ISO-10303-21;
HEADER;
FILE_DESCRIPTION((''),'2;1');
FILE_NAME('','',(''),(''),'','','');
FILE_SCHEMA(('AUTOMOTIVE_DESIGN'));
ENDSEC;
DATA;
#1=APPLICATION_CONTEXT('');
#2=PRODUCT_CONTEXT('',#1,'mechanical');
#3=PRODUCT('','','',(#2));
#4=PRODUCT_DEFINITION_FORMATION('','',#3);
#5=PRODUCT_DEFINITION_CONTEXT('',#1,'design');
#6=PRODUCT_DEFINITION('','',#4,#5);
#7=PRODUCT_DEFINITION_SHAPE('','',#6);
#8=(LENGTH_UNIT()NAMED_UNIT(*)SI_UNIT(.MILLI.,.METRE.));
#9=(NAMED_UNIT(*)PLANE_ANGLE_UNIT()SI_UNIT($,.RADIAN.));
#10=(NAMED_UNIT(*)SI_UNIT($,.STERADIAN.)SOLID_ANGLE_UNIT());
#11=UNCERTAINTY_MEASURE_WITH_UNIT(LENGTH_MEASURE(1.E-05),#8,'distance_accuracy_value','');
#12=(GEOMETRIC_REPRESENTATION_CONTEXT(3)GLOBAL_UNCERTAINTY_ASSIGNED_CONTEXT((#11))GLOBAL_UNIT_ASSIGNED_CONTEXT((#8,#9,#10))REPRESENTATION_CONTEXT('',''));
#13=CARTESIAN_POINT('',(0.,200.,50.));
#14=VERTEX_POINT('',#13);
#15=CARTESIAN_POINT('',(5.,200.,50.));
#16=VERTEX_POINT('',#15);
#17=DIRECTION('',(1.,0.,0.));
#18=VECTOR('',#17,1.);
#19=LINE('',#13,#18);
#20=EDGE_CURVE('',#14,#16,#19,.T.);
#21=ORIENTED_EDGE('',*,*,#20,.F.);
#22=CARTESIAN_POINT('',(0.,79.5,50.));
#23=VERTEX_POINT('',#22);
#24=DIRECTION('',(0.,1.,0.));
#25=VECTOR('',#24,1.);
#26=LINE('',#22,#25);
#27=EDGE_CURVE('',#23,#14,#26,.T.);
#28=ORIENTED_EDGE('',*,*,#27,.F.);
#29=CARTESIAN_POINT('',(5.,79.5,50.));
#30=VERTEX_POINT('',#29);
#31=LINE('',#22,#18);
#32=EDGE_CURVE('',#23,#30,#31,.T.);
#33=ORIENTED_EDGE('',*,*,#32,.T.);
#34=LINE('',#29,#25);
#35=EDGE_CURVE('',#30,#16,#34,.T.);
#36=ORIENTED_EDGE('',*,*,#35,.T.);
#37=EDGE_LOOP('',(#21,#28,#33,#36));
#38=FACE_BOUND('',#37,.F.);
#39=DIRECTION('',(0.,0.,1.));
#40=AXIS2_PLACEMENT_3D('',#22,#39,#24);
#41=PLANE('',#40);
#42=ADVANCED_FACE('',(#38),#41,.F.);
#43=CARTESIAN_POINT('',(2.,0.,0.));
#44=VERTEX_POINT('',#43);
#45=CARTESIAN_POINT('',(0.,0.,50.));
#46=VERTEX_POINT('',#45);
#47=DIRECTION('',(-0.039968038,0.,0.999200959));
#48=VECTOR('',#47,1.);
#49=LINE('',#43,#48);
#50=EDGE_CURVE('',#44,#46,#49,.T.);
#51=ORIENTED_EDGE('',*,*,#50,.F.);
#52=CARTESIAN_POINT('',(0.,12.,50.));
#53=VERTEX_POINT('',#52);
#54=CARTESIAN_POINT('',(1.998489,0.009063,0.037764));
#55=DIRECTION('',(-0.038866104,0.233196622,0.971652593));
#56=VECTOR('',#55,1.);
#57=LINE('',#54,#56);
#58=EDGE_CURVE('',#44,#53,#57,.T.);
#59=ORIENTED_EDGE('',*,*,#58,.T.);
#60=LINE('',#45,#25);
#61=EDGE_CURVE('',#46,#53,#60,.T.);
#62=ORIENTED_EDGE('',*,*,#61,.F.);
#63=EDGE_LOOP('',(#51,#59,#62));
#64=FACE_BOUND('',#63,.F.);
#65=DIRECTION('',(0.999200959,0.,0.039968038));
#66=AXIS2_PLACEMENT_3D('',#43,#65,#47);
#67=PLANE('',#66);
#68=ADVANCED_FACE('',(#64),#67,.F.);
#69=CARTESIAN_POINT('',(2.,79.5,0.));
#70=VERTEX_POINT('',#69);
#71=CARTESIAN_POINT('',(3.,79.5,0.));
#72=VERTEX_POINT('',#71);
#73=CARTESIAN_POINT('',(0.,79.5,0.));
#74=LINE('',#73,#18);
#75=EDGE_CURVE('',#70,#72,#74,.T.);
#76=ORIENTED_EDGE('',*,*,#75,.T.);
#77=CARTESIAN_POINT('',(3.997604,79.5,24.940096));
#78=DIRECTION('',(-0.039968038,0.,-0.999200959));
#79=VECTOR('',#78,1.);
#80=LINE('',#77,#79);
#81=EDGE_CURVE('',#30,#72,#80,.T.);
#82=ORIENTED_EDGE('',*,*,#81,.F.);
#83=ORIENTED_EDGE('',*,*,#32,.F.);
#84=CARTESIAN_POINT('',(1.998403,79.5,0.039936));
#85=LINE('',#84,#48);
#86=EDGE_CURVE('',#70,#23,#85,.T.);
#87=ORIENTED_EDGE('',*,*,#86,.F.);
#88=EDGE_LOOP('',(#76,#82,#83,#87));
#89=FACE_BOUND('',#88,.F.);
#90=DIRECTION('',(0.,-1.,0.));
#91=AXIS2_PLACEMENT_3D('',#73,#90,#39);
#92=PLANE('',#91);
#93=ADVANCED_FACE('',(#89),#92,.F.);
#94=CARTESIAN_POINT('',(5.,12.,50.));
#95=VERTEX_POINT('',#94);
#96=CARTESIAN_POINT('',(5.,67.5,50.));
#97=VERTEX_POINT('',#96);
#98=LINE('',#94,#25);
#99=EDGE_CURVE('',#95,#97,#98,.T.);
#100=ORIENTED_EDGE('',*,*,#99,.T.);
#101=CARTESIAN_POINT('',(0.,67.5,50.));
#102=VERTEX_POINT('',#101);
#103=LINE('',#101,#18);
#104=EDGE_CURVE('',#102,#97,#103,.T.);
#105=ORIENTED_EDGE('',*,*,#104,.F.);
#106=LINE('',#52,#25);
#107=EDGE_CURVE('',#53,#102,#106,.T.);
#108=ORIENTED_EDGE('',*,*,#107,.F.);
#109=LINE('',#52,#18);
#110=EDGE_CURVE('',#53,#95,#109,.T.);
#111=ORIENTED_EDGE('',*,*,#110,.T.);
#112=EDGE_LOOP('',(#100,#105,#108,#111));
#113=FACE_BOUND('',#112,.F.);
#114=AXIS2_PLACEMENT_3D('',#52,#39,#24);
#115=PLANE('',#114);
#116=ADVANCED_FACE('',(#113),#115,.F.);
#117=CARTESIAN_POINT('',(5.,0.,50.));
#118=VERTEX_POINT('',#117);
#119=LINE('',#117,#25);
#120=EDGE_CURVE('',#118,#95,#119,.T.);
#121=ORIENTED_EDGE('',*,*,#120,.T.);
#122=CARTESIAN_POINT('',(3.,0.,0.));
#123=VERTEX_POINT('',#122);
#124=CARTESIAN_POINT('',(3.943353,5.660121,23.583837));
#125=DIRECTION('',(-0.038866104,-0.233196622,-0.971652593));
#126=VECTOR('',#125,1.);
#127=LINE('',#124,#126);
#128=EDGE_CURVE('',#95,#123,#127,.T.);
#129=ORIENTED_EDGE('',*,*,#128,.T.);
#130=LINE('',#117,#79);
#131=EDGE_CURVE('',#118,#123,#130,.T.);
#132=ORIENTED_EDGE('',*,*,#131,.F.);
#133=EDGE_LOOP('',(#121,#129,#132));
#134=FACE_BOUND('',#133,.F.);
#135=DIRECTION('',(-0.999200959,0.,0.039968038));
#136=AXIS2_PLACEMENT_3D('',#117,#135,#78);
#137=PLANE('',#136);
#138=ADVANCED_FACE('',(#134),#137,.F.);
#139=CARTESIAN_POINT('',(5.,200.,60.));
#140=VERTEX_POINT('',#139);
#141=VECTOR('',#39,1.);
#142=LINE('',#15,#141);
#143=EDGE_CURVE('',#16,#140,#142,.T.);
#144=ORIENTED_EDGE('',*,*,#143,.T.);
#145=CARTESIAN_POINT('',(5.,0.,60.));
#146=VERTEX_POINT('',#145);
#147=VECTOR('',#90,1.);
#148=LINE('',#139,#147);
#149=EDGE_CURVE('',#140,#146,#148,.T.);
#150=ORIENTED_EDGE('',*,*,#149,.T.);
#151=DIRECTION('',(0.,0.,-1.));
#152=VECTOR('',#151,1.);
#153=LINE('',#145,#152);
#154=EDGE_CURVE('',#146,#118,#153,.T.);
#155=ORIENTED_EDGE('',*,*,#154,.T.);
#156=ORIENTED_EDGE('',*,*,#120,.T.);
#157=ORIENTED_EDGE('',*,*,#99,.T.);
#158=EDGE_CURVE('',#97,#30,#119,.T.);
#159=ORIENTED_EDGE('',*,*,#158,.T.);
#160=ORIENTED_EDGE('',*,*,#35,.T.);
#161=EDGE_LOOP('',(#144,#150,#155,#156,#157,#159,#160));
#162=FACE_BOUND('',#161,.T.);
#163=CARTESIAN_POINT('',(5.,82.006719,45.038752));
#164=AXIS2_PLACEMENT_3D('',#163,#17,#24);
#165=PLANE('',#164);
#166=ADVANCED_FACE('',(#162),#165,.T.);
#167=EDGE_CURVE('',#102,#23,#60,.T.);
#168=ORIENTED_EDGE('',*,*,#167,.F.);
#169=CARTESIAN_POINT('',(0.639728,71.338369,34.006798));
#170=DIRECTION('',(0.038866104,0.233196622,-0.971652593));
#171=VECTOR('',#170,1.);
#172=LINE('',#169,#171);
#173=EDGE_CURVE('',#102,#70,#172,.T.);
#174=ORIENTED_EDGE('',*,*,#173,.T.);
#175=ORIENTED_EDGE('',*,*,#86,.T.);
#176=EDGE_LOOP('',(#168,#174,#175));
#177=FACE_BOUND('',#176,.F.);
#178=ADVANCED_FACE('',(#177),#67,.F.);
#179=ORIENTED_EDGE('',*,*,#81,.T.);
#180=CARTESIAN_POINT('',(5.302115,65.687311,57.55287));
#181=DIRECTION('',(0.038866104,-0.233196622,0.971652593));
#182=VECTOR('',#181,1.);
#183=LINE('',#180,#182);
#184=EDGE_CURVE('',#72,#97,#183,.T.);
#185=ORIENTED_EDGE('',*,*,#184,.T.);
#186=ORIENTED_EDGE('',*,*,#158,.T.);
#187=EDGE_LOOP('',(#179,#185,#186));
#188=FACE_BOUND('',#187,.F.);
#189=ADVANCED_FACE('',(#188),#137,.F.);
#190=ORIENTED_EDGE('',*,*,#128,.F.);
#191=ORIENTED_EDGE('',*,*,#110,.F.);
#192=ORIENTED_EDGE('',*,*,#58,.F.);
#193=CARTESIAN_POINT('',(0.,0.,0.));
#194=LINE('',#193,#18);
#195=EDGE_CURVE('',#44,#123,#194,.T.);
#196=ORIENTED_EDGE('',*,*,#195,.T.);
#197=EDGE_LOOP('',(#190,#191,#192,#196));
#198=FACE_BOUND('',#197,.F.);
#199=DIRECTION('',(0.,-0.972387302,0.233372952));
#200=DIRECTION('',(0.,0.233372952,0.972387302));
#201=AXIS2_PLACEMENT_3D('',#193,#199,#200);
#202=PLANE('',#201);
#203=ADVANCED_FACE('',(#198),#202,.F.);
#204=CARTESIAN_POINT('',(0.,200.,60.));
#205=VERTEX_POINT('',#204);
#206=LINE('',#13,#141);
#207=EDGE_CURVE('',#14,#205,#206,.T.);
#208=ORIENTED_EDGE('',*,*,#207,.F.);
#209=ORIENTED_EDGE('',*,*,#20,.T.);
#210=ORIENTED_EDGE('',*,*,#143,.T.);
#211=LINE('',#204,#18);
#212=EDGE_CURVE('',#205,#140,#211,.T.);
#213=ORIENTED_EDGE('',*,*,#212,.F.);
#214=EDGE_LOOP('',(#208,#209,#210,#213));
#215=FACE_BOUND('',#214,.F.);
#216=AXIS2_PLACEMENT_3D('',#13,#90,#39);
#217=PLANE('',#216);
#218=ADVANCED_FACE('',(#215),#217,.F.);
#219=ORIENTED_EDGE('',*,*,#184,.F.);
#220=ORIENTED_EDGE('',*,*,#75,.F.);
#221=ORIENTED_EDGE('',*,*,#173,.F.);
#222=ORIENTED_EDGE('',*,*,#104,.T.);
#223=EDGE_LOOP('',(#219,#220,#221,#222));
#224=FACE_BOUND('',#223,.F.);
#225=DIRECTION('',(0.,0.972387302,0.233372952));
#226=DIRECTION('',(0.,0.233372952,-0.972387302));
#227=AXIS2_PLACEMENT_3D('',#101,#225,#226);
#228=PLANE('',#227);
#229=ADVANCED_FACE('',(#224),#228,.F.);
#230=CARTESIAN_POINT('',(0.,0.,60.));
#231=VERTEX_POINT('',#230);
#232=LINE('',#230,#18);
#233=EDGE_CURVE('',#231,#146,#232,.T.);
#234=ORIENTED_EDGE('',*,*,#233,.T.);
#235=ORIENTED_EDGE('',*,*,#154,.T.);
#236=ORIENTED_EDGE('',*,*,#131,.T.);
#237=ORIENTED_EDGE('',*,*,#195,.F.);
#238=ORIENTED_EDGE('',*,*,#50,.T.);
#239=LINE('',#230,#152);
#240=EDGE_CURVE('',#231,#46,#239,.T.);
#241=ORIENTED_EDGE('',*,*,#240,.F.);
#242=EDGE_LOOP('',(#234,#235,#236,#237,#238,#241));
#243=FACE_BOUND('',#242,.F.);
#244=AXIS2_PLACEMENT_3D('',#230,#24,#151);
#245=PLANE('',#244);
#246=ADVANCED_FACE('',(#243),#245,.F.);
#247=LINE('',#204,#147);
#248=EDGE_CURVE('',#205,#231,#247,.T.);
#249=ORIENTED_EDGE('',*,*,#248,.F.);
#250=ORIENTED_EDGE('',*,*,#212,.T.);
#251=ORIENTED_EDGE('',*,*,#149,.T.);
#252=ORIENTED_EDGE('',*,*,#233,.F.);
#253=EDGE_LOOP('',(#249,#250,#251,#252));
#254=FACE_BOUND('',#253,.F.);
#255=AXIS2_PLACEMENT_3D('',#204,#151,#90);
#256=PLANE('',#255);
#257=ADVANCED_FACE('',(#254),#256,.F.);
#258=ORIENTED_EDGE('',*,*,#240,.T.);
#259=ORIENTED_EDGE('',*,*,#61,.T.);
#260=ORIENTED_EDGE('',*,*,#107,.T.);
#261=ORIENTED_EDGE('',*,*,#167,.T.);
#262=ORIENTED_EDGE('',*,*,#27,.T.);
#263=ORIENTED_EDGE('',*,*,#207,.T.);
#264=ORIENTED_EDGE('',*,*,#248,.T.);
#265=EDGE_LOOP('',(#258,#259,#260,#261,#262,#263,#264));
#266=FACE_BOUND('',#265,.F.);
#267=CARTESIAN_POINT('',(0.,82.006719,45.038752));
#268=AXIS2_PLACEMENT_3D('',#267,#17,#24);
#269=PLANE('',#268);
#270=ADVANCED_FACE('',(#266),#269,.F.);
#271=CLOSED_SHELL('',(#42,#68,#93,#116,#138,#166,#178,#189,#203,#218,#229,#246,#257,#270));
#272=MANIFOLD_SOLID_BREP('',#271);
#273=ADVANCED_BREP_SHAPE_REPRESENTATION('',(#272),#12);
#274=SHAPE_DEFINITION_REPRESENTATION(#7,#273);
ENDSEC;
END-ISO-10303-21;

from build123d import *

# Parameters (mm, degrees)
F1_DEPTH = 5
F3_DEPTH = 200.001


# Not quite as in the source:
# - a feature names something its author has since deleted; it is built from what else it names


with BuildPart() as f1:
    # F0 (on Right) → F1 (new body)
    with BuildSketch(Plane.YZ):
        Polygon((200, 60), (0, 60), (0, 0), (12, 50), (67.5, 50), (79.5, 0), (79.5, 50), (200, 50), align=None)
    extrude(amount=F1_DEPTH)

    # F2 (on face) → F3 (cut, through all)
    with BuildSketch(Plane.XZ):
        Polygon((2, 0), (0, 50), (0, 0), align=None)
        Polygon((5, 0), (5, 50), (3, 0), align=None)
    extrude(amount=-F3_DEPTH, mode=Mode.SUBTRACT)


solid = f1.part
